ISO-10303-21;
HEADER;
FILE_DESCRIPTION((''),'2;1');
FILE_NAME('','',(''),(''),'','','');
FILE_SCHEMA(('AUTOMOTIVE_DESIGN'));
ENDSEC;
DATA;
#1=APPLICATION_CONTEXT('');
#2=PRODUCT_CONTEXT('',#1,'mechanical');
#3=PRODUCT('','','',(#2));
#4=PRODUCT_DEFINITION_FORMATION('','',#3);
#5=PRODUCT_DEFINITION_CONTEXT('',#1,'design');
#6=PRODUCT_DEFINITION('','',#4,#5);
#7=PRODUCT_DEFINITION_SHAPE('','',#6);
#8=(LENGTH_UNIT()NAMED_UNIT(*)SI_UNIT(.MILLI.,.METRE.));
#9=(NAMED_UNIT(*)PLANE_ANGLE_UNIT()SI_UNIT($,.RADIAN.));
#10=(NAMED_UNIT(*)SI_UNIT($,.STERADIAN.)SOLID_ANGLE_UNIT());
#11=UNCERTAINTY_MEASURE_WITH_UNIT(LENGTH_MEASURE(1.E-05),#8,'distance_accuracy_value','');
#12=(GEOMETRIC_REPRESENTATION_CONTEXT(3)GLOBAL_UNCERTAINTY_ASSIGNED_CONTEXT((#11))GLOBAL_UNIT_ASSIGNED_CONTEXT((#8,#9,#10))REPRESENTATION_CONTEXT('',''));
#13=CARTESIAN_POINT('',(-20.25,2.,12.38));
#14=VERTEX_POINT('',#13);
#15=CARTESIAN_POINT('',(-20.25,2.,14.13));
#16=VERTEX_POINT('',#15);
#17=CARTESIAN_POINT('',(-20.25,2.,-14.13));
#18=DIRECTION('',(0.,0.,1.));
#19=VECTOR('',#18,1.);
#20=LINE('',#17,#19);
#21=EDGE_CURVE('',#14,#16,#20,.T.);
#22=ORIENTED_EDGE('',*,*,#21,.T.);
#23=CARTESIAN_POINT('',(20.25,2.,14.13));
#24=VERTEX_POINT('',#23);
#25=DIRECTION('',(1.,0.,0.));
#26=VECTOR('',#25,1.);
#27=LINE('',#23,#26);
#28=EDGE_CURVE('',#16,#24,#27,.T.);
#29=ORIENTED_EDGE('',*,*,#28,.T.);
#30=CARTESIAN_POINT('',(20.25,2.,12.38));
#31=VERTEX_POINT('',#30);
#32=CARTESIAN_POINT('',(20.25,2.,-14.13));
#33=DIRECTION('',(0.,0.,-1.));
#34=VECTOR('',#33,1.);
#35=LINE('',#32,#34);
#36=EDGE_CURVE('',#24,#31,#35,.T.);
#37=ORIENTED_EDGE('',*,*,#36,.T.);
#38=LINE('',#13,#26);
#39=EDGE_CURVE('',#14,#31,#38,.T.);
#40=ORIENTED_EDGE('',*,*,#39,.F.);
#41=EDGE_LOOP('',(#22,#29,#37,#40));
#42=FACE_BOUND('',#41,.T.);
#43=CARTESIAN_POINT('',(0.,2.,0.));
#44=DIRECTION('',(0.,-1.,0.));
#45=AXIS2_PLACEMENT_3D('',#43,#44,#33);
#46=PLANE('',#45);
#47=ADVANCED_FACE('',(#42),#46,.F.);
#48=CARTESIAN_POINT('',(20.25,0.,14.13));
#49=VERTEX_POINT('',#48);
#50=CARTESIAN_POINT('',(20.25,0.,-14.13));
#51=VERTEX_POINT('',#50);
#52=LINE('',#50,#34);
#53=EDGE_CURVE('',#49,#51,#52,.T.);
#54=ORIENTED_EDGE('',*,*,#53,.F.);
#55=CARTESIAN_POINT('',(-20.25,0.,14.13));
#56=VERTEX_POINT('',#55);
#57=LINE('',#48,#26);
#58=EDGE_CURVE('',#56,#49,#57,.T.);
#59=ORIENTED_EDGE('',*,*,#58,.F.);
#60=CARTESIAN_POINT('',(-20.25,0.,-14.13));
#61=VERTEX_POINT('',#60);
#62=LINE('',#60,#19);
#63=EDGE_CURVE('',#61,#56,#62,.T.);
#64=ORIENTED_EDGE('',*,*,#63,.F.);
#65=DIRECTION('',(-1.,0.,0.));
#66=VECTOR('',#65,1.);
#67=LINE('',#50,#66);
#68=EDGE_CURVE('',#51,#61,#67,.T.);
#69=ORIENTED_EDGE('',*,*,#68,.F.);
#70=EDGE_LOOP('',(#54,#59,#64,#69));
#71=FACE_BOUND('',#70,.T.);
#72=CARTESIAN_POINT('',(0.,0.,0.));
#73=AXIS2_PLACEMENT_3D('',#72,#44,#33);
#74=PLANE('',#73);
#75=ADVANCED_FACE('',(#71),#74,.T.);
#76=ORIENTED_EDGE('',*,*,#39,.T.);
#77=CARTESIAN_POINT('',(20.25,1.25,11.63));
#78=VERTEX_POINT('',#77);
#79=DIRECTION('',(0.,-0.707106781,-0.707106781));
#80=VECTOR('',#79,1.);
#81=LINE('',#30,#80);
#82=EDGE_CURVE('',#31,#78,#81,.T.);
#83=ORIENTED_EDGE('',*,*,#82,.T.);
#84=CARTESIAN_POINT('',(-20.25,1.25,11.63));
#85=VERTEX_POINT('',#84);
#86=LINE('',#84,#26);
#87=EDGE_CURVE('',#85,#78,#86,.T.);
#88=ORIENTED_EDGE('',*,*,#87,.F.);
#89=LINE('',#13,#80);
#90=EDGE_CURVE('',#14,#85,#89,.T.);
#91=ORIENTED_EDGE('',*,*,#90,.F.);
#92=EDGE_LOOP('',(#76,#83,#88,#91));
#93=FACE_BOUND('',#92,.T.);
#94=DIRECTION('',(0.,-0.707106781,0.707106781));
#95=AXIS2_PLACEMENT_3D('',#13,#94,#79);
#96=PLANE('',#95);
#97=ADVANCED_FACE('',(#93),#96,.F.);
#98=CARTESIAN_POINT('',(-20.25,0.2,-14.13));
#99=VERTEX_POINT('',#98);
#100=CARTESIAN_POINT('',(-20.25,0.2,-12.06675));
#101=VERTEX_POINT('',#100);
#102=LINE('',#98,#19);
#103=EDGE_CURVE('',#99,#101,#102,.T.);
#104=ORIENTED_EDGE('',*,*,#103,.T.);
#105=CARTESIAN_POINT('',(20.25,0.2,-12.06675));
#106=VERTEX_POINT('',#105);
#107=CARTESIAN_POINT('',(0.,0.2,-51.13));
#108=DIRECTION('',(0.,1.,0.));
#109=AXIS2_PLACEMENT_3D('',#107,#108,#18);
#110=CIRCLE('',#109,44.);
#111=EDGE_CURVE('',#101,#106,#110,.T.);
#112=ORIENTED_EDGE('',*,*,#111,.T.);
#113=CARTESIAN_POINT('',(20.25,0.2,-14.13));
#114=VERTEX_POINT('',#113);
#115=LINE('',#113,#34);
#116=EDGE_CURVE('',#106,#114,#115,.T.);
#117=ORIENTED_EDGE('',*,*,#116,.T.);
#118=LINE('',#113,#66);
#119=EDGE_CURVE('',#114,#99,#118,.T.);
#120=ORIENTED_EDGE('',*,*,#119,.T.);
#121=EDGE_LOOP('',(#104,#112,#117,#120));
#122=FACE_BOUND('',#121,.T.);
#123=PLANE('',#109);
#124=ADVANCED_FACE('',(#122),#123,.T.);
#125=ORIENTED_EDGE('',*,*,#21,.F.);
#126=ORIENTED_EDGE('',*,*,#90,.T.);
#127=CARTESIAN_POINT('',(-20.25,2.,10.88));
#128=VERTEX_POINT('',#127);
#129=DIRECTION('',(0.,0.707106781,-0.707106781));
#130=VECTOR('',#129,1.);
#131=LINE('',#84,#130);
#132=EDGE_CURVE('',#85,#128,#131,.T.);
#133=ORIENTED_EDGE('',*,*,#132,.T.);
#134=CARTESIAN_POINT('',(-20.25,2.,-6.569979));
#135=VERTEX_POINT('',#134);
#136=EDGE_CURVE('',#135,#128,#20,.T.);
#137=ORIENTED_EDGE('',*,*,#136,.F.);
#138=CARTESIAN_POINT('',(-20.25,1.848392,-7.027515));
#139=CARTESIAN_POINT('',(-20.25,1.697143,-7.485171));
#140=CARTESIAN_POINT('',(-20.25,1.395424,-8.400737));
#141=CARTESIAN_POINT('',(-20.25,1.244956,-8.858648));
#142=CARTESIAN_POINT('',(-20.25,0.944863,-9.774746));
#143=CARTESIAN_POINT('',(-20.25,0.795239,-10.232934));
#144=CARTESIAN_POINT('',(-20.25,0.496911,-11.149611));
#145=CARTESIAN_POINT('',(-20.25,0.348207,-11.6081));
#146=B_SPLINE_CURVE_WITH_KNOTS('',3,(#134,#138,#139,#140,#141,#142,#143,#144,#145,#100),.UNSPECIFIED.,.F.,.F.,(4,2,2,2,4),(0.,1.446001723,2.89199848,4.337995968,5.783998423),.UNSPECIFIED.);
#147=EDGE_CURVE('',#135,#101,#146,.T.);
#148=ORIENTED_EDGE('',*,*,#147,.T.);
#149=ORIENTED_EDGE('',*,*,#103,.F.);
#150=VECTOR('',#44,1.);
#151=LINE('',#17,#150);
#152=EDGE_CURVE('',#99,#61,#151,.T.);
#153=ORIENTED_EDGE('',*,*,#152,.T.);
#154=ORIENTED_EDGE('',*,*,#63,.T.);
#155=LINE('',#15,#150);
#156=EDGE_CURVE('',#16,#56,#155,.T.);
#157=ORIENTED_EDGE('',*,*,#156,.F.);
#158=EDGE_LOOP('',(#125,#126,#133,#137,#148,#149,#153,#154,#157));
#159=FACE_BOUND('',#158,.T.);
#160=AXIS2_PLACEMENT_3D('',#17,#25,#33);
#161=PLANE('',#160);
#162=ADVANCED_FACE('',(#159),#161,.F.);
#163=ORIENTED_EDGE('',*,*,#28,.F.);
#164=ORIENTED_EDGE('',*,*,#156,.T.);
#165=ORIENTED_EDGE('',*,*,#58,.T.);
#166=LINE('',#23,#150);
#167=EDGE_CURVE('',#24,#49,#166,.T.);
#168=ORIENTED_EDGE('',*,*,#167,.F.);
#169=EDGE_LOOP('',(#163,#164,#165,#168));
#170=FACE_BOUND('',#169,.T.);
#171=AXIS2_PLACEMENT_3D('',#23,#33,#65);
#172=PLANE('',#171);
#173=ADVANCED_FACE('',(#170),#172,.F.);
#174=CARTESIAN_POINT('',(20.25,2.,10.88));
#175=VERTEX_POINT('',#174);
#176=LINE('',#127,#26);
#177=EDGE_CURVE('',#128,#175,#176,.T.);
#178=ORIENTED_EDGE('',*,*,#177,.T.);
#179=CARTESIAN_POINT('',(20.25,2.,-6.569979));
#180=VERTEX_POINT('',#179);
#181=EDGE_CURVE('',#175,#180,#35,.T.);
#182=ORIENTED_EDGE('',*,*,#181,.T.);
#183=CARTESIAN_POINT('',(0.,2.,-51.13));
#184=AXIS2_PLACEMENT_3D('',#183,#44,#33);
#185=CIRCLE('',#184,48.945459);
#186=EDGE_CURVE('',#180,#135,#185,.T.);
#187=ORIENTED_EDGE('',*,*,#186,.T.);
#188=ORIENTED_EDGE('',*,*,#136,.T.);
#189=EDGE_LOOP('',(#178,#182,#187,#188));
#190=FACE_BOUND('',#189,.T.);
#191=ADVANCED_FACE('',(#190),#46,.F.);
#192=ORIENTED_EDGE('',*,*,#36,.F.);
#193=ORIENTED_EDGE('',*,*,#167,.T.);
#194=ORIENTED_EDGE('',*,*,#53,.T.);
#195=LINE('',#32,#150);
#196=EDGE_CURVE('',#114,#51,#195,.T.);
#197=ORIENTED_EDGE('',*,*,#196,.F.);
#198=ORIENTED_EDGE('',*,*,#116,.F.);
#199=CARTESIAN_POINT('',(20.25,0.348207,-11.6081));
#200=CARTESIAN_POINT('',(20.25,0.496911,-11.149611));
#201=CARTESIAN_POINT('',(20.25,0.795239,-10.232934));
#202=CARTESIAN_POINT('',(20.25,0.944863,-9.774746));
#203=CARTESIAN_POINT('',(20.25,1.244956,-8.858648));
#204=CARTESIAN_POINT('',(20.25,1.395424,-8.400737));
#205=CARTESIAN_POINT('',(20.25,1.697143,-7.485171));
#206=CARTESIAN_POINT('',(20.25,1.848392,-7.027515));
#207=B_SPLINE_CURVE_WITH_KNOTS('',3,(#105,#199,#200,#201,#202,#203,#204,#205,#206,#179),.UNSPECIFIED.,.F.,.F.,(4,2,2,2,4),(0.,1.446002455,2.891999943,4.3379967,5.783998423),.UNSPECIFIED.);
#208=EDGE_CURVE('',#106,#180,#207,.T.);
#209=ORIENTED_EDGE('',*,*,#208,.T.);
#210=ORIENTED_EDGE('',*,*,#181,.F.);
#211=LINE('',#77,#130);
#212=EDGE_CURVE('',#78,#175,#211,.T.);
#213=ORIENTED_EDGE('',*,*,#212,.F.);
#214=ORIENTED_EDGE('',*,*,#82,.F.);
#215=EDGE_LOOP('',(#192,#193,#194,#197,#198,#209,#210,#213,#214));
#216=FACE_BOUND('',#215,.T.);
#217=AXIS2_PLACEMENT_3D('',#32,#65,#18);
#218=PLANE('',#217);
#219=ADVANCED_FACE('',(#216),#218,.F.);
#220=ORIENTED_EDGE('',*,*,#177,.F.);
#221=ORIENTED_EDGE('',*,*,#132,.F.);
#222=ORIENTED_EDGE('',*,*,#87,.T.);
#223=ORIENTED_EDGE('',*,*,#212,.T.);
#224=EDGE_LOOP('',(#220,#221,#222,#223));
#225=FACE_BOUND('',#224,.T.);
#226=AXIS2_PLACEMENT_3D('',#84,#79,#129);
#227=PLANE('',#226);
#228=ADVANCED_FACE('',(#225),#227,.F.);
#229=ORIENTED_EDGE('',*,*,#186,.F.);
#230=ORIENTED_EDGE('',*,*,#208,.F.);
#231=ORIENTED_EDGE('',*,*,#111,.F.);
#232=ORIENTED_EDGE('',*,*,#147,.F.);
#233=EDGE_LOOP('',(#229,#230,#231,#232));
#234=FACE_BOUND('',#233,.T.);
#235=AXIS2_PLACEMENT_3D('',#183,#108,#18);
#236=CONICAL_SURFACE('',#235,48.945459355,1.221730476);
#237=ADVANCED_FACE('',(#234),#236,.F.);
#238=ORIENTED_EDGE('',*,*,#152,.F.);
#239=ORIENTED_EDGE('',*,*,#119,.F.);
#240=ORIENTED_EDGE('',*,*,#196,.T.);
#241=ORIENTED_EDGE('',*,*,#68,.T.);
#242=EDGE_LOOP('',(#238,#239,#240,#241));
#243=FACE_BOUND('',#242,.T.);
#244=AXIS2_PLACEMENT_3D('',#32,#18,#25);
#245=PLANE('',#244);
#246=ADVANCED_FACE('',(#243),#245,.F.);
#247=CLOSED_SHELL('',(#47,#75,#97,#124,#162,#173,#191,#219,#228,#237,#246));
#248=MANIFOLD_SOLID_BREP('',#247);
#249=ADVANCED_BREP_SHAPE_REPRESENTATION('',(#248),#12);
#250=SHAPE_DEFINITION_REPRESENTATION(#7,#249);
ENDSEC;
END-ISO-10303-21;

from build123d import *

# Parameters (mm, degrees)
SKETCH1_W           = 40.5
SKETCH1_H           = 28.26
BOSS_EXTRUDE1_DEPTH = 2
SKETCH2_R           = 44
CUT_EXTRUDE1_DEPTH  = 1.8
CHAMFER1_SIZE       = 4.945459355
CHAMFER1_SIZE_2     = 1.8
CUT_EXTRUDE2_DEPTH  = 43.940737069


with BuildPart() as part:
    # Sketch1 → Boss-Extrude1 (new body)
    with BuildSketch(Plane(origin=(0, 0, 0), x_dir=(1, 0, 0), z_dir=(0, 1, 0))):
        Rectangle(SKETCH1_W, SKETCH1_H)
    extrude(amount=BOSS_EXTRUDE1_DEPTH)

    # Sketch2 → Cut-Extrude1 (cut)
    with BuildSketch(Plane(origin=(0, 2, 0), x_dir=(1, 0, 0), z_dir=(0, 1, 0))):
        with Locations((0, 51.13)):
            Circle(SKETCH2_R)
    extrude(amount=-CUT_EXTRUDE1_DEPTH, mode=Mode.SUBTRACT)

    # Chamfer1
    # the kernel refuses this chamfer: 4.945459355, 1.8 mm, written as the material it takes off along each edge
    with BuildSketch(Plane(origin=(0, 2, -51.13), x_dir=(-0.6960446295726113, 0, 0.7179985192485611), z_dir=(-0.7179985192485611, 0, -0.6960446295726113))) as chamfer1_piece_1_section:
        Polygon((44 + CHAMFER1_SIZE, 0), (44, -CHAMFER1_SIZE_2), (44, 0), align=None)
    chamfer1_piece_1 = revolve(axis=Axis((0, 2, -51.13), (0, 1, 0)), revolution_arc=88.221038487, mode=Mode.PRIVATE)
    chamfer1_piece_1 = split(chamfer1_piece_1, bisect_by=Plane(origin=(0, 0.2, -4.588848893), z_dir=(0, 1, 0)), keep=Keep.TOP, mode=Mode.PRIVATE)
    add(chamfer1_piece_1, mode=Mode.SUBTRACT)

    # Sketch3 → Cut-Extrude2 (cut, through all)
    with BuildSketch(Plane(origin=(20.25, 0, 0), x_dir=(0, 0, -1), z_dir=(1, 0, 0))):
        Polygon((-12.38, 2), (-11.63, 1.25), (-10.88, 2), (-10.88, 3.484474426), (-12.38, 3.484474426), align=None)
    extrude(amount=-CUT_EXTRUDE2_DEPTH, mode=Mode.SUBTRACT)


solid = part.part
